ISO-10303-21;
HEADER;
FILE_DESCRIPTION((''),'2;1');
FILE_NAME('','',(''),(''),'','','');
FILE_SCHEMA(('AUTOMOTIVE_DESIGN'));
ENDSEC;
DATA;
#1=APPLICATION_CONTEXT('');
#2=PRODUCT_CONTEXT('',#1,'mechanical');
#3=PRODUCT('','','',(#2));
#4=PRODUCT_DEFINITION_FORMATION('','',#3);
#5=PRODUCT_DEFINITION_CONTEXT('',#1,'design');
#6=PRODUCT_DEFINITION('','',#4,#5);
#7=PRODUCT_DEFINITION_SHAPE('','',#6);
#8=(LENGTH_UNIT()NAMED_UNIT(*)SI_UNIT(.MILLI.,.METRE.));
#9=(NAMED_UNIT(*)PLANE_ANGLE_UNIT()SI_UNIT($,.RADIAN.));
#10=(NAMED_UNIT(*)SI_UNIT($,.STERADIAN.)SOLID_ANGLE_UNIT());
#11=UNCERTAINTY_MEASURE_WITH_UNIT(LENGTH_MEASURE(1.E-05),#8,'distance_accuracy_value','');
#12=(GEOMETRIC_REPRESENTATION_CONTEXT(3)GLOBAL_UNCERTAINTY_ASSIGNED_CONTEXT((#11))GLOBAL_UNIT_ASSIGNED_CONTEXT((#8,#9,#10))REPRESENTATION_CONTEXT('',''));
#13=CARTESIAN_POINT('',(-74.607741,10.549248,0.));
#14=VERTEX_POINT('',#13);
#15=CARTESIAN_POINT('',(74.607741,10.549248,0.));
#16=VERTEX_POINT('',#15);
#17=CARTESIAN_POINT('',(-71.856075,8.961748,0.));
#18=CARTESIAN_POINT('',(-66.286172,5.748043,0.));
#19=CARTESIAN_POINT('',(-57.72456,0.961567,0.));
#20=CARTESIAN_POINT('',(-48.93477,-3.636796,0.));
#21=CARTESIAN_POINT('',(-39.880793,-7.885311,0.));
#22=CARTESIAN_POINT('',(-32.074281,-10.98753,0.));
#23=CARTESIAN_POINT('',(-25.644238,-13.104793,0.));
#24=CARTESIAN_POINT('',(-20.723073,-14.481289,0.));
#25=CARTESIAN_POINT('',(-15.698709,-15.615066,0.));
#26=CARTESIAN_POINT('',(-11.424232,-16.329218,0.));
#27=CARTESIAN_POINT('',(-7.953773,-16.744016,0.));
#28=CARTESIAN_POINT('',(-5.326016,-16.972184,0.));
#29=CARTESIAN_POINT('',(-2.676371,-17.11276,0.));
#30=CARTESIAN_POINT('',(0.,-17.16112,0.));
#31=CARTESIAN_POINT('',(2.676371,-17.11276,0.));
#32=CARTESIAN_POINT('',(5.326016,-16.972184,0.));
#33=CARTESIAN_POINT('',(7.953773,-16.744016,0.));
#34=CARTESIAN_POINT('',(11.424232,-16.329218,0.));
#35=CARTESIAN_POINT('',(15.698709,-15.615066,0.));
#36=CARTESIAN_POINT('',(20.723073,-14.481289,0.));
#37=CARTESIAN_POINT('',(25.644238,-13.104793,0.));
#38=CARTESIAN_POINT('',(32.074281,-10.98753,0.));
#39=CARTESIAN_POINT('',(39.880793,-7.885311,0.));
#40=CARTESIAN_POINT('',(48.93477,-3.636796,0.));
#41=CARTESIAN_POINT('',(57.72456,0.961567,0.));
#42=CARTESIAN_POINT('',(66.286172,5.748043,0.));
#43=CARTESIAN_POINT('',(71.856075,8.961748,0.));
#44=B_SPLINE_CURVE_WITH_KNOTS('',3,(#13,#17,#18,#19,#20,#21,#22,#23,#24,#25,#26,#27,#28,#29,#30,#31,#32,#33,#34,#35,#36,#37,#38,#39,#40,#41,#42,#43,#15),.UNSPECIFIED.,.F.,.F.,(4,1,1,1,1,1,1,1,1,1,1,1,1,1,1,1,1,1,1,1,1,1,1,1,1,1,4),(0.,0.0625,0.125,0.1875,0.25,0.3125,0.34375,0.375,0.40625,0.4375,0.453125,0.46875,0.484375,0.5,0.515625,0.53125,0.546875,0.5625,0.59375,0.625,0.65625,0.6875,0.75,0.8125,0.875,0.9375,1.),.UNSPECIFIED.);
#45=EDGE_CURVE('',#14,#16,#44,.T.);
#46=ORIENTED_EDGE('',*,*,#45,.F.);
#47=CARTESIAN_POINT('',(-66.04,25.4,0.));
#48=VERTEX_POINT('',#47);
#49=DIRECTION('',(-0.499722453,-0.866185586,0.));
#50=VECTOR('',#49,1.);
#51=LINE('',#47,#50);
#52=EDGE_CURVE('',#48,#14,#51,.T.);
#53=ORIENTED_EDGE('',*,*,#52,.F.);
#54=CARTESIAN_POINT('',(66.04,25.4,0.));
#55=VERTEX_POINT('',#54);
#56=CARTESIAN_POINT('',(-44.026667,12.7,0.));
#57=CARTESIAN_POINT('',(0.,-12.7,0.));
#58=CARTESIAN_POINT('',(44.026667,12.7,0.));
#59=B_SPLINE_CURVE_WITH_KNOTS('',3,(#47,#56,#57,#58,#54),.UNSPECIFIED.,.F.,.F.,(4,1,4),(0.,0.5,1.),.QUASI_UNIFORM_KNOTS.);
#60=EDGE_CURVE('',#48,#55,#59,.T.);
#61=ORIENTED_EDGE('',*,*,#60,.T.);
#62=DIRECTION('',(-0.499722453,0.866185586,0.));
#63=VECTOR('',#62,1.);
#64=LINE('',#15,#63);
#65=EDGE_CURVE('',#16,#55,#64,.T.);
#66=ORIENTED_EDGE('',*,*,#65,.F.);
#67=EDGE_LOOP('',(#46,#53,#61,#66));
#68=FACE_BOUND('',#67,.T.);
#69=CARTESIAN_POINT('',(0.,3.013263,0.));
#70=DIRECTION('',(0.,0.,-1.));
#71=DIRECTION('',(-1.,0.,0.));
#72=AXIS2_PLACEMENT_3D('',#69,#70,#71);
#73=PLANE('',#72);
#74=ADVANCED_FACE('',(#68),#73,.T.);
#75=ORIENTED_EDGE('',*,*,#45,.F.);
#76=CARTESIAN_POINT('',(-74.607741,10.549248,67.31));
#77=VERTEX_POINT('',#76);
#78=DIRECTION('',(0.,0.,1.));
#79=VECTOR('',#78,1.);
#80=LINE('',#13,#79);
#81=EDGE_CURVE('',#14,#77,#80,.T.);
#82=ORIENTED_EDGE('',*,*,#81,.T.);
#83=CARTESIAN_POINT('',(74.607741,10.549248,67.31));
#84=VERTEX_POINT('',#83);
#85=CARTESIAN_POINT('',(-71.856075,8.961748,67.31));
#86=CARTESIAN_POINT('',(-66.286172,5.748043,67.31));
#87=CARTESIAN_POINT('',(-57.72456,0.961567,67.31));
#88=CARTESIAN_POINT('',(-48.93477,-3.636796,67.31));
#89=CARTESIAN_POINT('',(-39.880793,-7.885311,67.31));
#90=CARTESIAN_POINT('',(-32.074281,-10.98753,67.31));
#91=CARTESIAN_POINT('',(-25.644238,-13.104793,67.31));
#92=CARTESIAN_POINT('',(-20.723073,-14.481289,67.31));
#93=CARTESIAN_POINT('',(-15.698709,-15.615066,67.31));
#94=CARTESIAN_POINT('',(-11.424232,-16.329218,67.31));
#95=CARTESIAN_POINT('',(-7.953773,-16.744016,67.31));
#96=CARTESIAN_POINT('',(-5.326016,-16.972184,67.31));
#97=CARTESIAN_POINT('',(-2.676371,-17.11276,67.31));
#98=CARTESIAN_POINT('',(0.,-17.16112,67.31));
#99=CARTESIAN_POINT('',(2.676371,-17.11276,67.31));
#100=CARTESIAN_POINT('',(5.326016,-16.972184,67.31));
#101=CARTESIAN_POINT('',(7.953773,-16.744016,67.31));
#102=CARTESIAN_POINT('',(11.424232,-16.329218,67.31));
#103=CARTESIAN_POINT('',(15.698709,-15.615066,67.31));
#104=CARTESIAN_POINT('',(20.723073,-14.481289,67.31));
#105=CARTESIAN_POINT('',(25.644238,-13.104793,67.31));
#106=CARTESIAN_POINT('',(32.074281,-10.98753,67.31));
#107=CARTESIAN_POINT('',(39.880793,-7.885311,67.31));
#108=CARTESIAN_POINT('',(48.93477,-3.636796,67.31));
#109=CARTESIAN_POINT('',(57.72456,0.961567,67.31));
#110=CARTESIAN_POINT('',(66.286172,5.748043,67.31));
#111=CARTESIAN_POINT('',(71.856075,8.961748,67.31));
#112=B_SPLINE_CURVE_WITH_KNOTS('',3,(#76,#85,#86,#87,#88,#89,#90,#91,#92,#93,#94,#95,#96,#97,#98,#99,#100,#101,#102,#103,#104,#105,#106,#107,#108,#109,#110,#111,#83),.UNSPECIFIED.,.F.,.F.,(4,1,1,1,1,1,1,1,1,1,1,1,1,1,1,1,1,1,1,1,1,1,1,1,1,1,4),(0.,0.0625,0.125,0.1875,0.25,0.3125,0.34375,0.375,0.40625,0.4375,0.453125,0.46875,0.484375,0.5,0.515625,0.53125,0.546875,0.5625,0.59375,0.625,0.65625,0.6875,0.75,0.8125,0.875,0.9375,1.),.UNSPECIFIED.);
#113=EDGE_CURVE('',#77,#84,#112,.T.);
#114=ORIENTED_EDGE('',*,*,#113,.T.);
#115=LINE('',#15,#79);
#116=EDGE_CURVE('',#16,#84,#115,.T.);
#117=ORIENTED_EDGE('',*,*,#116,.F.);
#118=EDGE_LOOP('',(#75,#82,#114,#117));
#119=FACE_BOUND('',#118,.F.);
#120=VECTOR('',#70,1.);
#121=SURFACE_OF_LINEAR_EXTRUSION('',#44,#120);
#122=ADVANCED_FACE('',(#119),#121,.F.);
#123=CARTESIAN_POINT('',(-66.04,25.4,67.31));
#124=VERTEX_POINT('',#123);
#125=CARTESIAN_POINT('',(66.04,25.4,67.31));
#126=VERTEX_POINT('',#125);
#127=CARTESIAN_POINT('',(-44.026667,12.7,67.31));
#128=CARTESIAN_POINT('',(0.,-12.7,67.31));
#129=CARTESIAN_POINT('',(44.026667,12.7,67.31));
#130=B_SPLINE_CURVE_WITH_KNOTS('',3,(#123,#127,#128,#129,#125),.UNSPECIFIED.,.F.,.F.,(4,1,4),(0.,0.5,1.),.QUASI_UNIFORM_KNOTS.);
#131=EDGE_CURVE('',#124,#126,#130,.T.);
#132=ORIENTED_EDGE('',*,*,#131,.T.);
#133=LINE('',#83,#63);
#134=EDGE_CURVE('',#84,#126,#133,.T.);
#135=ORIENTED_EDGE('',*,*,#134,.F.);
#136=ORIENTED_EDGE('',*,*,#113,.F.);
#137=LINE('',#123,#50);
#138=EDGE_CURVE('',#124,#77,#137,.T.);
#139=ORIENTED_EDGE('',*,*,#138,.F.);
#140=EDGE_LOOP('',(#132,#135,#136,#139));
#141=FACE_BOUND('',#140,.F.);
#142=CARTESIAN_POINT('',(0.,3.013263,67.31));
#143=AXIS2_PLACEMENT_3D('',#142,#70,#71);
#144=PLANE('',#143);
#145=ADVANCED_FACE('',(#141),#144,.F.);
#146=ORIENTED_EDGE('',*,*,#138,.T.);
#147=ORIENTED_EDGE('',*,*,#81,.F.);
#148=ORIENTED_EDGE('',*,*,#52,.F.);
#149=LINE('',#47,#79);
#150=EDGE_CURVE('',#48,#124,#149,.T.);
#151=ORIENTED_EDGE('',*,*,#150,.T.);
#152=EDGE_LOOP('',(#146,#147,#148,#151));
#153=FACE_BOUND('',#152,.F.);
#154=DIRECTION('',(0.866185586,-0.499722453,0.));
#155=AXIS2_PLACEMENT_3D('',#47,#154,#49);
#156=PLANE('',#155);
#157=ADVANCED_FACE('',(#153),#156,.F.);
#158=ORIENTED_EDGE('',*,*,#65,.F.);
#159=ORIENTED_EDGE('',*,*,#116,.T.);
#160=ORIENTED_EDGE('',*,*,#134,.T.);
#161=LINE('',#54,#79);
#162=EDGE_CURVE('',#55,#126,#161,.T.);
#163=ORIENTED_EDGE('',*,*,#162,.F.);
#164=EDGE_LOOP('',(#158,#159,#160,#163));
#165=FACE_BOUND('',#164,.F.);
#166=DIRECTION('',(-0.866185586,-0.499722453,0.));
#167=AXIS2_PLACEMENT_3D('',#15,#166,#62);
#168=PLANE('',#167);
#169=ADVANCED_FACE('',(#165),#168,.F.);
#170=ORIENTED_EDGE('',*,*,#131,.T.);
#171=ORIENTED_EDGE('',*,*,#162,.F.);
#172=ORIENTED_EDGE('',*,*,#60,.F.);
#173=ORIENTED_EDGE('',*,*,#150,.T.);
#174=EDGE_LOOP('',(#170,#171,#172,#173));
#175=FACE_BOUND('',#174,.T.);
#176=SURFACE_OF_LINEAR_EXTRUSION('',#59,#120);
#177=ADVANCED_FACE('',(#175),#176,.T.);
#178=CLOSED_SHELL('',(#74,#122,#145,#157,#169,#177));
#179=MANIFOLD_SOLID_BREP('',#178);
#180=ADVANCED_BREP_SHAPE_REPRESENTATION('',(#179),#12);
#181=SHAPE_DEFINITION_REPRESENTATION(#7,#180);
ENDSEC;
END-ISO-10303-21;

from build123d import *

# Parameters (mm, degrees)
F1_DEPTH = 67.31


# Not quite as in the source:
# - the dataset's text gives a spline's control points without its knots; the knots are read off the source's solid


with BuildPart() as f1:
    # F0 (on Top) → F1 (new body)
    with BuildSketch(Plane.XY):
        with BuildLine():
            add(Edge.make_bspline(
                [(-66.04, 25.4), (-44.0266666667, 12.7), (0, -12.7), (44.0266666667, 12.7), (66.04, 25.4)],
                knots=[0, 0, 0, 0, 0.5, 1, 1, 1, 1], degree=3))
            Line((-66.04, 25.4), (-74.6077414651, 10.5492481272))
            add(Edge.make_bspline(
                [(-74.6077414651, 10.5492481272), (-71.8560747984, 8.9617481272), (-66.2861722031, 5.7480427564), (-57.724560048, 0.9615668395), (-48.9347700683, -3.6367958027), (-39.8807925782, -7.8853107319), (-32.0742809117, -10.9875301018), (-25.6442375738, -13.1047930023), (-20.7230725464, -14.4812886294), (-15.6987085879, -15.6150662473), (-11.4242321111, -16.3292183153), (-7.9537726238, -16.7440164926), (-5.3260159043, -16.9721840593), (-2.6763709835, -17.1127600702), (0, -17.1611199649), (2.6763709835, -17.1127600702), (5.3260159043, -16.9721840593), (7.9537726238, -16.7440164926), (11.4242321111, -16.3292183153), (15.6987085879, -15.6150662473), (20.7230725464, -14.4812886294), (25.6442375738, -13.1047930023), (32.0742809117, -10.9875301018), (39.8807925782, -7.8853107319), (48.9347700683, -3.6367958027), (57.724560048, 0.9615668395), (66.2861722031, 5.7480427564), (71.8560747984, 8.9617481272), (74.6077414651, 10.5492481272)],
                knots=[0, 0, 0, 0, 0.0625, 0.125, 0.1875, 0.25, 0.3125, 0.34375, 0.375, 0.40625, 0.4375, 0.453125, 0.46875, 0.484375, 0.5, 0.515625, 0.53125, 0.546875, 0.5625, 0.59375, 0.625, 0.65625, 0.6875, 0.75, 0.8125, 0.875, 0.9375, 1, 1, 1, 1], degree=3))
            Line((74.6077414651, 10.5492481272), (66.04, 25.4))
        make_face()
    extrude(amount=F1_DEPTH)


solid = f1.part
